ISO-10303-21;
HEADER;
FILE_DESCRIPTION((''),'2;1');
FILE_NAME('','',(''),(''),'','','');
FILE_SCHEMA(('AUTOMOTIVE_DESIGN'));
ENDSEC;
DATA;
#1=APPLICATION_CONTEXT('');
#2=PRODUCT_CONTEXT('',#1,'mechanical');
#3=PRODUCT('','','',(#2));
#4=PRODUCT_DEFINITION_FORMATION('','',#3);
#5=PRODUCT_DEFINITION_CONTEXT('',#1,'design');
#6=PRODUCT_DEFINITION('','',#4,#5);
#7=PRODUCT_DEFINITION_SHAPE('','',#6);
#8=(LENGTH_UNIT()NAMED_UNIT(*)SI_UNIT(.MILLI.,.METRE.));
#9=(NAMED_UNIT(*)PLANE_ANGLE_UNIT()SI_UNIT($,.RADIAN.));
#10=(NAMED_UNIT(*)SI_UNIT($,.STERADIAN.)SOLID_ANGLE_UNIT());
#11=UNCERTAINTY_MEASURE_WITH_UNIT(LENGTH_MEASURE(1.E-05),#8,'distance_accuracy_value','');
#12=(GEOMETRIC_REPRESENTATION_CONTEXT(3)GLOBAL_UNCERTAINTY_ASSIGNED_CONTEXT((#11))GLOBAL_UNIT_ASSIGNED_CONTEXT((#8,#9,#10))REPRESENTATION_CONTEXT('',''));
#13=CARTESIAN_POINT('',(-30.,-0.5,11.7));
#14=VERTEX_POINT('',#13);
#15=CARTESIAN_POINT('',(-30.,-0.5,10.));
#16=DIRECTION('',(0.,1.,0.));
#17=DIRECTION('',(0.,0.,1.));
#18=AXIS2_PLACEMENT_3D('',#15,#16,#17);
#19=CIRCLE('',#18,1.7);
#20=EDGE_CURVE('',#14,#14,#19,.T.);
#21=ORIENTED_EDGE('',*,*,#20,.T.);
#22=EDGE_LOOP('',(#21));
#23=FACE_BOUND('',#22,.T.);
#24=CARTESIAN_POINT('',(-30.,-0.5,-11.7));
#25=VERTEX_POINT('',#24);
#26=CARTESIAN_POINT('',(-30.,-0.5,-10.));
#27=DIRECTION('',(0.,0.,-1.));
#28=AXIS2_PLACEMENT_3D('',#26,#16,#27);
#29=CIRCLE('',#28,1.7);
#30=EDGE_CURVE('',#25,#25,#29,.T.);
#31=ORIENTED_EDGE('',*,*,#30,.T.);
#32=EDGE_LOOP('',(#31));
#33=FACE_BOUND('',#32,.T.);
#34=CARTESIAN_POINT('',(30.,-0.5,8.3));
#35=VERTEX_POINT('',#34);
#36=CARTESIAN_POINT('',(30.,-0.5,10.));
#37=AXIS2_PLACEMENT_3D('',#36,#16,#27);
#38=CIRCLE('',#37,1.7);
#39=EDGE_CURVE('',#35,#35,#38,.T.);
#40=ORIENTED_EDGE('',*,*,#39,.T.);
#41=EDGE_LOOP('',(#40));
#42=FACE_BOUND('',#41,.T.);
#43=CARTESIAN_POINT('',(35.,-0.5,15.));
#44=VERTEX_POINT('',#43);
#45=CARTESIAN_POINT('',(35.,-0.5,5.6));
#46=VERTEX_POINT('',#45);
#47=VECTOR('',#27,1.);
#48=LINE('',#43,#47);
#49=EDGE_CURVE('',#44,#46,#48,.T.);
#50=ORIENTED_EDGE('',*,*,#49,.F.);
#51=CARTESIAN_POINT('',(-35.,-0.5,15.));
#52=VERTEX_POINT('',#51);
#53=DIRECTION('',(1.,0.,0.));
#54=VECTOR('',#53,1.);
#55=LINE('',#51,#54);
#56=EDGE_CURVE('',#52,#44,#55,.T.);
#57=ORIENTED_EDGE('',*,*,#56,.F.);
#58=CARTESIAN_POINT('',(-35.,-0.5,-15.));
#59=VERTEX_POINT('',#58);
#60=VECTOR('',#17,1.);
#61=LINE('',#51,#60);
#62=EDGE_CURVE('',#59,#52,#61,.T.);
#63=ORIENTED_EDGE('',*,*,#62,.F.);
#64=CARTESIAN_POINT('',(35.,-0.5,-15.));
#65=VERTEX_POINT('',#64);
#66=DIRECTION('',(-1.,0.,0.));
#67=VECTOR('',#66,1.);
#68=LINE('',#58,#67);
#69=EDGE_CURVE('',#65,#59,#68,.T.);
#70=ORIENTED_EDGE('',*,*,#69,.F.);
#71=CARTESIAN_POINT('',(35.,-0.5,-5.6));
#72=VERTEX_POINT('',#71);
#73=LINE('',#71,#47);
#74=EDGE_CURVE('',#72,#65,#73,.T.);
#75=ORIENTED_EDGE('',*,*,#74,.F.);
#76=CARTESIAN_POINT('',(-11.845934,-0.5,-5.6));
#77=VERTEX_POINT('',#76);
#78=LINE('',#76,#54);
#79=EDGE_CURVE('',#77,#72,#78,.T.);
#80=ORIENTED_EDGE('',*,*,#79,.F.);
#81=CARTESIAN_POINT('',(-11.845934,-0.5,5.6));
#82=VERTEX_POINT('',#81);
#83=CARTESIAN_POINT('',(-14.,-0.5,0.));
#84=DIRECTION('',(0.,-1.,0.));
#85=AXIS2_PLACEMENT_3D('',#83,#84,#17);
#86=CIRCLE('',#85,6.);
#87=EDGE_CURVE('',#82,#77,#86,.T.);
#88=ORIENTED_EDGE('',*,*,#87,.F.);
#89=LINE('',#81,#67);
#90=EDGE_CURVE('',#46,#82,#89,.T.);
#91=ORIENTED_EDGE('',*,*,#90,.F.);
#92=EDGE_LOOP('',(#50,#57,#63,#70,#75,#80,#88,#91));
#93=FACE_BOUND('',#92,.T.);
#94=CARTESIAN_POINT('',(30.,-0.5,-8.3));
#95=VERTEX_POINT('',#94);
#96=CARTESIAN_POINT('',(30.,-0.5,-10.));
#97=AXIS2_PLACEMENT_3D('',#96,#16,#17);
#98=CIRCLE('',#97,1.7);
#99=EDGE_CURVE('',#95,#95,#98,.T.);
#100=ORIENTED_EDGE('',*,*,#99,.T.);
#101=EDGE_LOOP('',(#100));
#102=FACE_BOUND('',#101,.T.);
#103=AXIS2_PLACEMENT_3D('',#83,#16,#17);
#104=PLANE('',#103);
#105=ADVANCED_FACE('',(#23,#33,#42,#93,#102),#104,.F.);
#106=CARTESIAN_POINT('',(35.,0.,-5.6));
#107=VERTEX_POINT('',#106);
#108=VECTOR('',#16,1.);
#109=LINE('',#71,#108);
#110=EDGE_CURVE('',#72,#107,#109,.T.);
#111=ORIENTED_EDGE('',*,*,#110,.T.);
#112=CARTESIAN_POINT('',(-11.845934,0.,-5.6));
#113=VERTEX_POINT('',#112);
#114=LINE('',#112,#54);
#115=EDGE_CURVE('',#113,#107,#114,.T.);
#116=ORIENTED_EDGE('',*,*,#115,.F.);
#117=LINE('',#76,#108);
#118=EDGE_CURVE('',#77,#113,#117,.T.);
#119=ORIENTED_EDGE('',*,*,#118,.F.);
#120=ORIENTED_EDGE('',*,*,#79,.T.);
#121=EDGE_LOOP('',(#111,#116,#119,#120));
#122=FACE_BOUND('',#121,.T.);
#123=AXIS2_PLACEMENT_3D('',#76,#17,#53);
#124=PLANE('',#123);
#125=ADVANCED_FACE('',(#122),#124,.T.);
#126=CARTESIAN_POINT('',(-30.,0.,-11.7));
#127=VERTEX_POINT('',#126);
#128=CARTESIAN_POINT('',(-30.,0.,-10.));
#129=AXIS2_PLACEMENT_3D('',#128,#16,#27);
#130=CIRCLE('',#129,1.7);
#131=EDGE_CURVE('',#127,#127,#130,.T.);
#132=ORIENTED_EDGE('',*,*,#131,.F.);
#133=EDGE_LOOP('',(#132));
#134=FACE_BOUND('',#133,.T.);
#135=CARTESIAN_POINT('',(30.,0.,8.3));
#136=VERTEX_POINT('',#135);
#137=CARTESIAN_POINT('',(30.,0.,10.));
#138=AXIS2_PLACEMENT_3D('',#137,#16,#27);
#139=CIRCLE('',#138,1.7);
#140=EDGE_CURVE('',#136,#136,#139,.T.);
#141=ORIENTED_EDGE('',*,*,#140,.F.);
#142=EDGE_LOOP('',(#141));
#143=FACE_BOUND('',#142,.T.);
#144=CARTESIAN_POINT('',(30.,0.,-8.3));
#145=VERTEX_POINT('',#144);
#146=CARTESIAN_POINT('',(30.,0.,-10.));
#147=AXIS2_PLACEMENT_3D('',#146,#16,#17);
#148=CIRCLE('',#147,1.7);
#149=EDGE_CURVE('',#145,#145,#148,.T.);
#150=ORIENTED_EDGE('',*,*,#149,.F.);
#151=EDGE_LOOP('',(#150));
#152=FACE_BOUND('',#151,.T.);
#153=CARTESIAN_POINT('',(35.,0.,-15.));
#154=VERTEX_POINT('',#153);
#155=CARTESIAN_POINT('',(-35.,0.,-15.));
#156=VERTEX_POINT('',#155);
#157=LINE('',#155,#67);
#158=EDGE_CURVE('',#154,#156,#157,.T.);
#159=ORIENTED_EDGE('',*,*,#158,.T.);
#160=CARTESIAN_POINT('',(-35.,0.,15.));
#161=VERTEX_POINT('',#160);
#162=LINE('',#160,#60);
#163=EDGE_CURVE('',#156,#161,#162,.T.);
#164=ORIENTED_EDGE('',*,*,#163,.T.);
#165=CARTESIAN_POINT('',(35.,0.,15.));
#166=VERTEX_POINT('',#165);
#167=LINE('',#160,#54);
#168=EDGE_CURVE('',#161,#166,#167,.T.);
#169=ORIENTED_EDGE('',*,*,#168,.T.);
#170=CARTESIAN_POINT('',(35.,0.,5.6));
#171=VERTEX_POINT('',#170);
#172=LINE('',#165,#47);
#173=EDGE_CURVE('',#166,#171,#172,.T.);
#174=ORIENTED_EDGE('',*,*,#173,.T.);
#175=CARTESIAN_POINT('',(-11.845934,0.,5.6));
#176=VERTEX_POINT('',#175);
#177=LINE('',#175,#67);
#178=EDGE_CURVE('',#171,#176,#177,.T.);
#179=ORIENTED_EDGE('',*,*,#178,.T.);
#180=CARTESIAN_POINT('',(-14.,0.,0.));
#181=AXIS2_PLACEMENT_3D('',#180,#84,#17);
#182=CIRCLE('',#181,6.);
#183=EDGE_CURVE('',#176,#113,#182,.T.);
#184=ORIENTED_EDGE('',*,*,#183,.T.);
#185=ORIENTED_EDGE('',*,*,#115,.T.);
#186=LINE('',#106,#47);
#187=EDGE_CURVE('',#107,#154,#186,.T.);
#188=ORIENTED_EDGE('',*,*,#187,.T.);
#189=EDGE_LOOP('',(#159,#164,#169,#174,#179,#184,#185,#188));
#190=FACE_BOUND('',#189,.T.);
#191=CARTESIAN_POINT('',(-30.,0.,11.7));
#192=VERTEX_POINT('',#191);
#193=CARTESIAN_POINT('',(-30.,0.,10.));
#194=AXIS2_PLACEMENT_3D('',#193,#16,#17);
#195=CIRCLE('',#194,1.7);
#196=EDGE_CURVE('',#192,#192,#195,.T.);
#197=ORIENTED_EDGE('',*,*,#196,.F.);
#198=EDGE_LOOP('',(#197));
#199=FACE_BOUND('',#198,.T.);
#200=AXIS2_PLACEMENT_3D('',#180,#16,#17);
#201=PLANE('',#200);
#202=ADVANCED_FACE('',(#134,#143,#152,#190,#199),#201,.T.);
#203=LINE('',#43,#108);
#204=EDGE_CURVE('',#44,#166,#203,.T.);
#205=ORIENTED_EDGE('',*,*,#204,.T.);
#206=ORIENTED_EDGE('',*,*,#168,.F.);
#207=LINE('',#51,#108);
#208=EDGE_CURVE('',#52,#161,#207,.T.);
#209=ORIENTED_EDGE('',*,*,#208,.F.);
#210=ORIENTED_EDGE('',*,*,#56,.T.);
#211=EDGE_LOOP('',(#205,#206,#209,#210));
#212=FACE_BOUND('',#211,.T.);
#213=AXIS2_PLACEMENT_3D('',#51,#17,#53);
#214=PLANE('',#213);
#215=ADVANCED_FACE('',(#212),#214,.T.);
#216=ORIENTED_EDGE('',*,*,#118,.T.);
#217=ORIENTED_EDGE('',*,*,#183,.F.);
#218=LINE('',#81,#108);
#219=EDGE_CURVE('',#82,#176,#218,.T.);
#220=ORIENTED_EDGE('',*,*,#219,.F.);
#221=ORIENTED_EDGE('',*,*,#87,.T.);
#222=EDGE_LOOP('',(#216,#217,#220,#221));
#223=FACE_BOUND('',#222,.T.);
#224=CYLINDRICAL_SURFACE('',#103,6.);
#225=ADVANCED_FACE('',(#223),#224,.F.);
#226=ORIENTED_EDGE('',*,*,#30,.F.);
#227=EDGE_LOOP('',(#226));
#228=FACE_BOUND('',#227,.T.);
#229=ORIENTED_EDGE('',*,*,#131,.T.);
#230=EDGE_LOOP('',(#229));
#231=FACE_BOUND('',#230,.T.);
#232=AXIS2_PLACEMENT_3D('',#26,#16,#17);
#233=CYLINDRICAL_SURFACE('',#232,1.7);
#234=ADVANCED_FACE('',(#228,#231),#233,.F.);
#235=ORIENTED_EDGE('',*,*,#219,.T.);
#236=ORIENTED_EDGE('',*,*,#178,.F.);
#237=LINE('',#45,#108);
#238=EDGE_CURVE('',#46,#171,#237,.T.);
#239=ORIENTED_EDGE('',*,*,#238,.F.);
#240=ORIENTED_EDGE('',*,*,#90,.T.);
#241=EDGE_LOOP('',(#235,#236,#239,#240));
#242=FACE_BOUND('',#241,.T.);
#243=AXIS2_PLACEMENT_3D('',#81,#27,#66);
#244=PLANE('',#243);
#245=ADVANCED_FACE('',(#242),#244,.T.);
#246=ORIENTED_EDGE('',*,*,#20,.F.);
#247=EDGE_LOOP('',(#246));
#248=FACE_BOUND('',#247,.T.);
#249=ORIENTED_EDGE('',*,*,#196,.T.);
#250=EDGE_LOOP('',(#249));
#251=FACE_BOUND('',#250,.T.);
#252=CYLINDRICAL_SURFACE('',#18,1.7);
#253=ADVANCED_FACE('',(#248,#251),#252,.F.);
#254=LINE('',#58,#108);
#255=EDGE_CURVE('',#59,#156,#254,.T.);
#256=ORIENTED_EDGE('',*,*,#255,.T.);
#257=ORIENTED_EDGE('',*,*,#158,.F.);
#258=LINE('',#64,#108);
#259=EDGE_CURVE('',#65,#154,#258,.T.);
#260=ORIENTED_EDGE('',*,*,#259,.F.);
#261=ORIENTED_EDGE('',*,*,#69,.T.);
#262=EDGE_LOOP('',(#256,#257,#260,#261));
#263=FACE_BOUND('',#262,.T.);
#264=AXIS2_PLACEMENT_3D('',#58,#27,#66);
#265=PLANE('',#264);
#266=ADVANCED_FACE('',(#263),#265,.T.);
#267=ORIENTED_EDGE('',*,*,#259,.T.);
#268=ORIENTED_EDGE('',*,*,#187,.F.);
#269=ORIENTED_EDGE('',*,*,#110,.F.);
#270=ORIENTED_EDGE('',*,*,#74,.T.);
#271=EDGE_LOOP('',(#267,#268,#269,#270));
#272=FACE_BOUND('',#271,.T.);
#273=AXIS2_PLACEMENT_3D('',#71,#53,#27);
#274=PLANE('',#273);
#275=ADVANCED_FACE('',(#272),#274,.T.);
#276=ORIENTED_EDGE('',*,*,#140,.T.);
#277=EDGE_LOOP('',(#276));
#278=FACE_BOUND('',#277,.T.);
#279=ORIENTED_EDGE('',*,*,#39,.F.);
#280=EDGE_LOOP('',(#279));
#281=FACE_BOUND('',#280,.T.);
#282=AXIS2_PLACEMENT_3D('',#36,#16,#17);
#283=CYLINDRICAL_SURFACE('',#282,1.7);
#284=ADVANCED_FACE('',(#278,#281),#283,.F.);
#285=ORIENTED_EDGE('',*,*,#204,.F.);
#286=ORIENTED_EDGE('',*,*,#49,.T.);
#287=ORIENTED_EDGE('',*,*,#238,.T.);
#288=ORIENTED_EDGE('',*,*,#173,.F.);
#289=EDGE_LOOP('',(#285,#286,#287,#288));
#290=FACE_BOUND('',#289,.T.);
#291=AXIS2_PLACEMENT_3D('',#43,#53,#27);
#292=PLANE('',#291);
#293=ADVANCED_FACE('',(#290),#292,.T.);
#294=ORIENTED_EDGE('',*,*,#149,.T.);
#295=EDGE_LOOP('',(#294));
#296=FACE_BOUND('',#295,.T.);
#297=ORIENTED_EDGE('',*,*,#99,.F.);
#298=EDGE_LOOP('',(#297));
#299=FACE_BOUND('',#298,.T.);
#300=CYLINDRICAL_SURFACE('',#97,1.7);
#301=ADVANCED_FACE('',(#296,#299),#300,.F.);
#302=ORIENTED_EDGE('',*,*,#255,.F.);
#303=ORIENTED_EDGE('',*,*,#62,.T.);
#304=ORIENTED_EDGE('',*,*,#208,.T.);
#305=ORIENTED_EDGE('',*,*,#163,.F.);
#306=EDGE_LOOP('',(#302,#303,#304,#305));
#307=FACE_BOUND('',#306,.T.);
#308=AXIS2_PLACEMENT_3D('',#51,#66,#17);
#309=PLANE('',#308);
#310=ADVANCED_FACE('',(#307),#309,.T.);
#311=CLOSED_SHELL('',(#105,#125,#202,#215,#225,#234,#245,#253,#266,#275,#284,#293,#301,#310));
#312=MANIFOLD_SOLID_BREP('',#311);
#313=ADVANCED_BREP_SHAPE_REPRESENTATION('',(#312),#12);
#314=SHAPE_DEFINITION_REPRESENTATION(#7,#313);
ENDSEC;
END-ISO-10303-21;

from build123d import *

# Parameters (mm, degrees)
ESQUISSE1_R               = 1.7
T_LE_DE_BASE_PLI_E1_DEPTH = 0.5


# Sheet-metal steps are written as plain solids
with BuildPart() as part:
    # Esquisse1 → Tôle de base pliée1 (new body)
    with BuildSketch(Plane(origin=(0, 0, 0), x_dir=(1, 0, 0), z_dir=(0, 1, 0))):
        with BuildLine():
            Line((-35, -15), (35, -15))
            Line((35, -15), (35, -5.6))
            Line((35, -5.6), (-11.845934077, -5.6))
            ThreePointArc((-11.845934077, -5.6), (-20, 0), (-11.845934077, 5.6))
            Line((-11.845934077, 5.6), (35, 5.6))
            Line((35, 5.6), (35, 15))
            Line((35, 15), (-35, 15))
            Line((-35, 15), (-35, -15))
        make_face()
        with Locations(Location((30, 10, 0), (0, 0, 270))):
            Circle(ESQUISSE1_R, mode=Mode.SUBTRACT)
        with Locations(Location((30, -10, 0), (0, 0, 90))):
            Circle(ESQUISSE1_R, mode=Mode.SUBTRACT)
        with Locations(Location((-30, -10, 0), (0, 0, 270))):
            Circle(ESQUISSE1_R, mode=Mode.SUBTRACT)
        with Locations(Location((-30, 10, 0), (0, 0, 90))):
            Circle(ESQUISSE1_R, mode=Mode.SUBTRACT)
    extrude(amount=-T_LE_DE_BASE_PLI_E1_DEPTH)


solid = part.part
